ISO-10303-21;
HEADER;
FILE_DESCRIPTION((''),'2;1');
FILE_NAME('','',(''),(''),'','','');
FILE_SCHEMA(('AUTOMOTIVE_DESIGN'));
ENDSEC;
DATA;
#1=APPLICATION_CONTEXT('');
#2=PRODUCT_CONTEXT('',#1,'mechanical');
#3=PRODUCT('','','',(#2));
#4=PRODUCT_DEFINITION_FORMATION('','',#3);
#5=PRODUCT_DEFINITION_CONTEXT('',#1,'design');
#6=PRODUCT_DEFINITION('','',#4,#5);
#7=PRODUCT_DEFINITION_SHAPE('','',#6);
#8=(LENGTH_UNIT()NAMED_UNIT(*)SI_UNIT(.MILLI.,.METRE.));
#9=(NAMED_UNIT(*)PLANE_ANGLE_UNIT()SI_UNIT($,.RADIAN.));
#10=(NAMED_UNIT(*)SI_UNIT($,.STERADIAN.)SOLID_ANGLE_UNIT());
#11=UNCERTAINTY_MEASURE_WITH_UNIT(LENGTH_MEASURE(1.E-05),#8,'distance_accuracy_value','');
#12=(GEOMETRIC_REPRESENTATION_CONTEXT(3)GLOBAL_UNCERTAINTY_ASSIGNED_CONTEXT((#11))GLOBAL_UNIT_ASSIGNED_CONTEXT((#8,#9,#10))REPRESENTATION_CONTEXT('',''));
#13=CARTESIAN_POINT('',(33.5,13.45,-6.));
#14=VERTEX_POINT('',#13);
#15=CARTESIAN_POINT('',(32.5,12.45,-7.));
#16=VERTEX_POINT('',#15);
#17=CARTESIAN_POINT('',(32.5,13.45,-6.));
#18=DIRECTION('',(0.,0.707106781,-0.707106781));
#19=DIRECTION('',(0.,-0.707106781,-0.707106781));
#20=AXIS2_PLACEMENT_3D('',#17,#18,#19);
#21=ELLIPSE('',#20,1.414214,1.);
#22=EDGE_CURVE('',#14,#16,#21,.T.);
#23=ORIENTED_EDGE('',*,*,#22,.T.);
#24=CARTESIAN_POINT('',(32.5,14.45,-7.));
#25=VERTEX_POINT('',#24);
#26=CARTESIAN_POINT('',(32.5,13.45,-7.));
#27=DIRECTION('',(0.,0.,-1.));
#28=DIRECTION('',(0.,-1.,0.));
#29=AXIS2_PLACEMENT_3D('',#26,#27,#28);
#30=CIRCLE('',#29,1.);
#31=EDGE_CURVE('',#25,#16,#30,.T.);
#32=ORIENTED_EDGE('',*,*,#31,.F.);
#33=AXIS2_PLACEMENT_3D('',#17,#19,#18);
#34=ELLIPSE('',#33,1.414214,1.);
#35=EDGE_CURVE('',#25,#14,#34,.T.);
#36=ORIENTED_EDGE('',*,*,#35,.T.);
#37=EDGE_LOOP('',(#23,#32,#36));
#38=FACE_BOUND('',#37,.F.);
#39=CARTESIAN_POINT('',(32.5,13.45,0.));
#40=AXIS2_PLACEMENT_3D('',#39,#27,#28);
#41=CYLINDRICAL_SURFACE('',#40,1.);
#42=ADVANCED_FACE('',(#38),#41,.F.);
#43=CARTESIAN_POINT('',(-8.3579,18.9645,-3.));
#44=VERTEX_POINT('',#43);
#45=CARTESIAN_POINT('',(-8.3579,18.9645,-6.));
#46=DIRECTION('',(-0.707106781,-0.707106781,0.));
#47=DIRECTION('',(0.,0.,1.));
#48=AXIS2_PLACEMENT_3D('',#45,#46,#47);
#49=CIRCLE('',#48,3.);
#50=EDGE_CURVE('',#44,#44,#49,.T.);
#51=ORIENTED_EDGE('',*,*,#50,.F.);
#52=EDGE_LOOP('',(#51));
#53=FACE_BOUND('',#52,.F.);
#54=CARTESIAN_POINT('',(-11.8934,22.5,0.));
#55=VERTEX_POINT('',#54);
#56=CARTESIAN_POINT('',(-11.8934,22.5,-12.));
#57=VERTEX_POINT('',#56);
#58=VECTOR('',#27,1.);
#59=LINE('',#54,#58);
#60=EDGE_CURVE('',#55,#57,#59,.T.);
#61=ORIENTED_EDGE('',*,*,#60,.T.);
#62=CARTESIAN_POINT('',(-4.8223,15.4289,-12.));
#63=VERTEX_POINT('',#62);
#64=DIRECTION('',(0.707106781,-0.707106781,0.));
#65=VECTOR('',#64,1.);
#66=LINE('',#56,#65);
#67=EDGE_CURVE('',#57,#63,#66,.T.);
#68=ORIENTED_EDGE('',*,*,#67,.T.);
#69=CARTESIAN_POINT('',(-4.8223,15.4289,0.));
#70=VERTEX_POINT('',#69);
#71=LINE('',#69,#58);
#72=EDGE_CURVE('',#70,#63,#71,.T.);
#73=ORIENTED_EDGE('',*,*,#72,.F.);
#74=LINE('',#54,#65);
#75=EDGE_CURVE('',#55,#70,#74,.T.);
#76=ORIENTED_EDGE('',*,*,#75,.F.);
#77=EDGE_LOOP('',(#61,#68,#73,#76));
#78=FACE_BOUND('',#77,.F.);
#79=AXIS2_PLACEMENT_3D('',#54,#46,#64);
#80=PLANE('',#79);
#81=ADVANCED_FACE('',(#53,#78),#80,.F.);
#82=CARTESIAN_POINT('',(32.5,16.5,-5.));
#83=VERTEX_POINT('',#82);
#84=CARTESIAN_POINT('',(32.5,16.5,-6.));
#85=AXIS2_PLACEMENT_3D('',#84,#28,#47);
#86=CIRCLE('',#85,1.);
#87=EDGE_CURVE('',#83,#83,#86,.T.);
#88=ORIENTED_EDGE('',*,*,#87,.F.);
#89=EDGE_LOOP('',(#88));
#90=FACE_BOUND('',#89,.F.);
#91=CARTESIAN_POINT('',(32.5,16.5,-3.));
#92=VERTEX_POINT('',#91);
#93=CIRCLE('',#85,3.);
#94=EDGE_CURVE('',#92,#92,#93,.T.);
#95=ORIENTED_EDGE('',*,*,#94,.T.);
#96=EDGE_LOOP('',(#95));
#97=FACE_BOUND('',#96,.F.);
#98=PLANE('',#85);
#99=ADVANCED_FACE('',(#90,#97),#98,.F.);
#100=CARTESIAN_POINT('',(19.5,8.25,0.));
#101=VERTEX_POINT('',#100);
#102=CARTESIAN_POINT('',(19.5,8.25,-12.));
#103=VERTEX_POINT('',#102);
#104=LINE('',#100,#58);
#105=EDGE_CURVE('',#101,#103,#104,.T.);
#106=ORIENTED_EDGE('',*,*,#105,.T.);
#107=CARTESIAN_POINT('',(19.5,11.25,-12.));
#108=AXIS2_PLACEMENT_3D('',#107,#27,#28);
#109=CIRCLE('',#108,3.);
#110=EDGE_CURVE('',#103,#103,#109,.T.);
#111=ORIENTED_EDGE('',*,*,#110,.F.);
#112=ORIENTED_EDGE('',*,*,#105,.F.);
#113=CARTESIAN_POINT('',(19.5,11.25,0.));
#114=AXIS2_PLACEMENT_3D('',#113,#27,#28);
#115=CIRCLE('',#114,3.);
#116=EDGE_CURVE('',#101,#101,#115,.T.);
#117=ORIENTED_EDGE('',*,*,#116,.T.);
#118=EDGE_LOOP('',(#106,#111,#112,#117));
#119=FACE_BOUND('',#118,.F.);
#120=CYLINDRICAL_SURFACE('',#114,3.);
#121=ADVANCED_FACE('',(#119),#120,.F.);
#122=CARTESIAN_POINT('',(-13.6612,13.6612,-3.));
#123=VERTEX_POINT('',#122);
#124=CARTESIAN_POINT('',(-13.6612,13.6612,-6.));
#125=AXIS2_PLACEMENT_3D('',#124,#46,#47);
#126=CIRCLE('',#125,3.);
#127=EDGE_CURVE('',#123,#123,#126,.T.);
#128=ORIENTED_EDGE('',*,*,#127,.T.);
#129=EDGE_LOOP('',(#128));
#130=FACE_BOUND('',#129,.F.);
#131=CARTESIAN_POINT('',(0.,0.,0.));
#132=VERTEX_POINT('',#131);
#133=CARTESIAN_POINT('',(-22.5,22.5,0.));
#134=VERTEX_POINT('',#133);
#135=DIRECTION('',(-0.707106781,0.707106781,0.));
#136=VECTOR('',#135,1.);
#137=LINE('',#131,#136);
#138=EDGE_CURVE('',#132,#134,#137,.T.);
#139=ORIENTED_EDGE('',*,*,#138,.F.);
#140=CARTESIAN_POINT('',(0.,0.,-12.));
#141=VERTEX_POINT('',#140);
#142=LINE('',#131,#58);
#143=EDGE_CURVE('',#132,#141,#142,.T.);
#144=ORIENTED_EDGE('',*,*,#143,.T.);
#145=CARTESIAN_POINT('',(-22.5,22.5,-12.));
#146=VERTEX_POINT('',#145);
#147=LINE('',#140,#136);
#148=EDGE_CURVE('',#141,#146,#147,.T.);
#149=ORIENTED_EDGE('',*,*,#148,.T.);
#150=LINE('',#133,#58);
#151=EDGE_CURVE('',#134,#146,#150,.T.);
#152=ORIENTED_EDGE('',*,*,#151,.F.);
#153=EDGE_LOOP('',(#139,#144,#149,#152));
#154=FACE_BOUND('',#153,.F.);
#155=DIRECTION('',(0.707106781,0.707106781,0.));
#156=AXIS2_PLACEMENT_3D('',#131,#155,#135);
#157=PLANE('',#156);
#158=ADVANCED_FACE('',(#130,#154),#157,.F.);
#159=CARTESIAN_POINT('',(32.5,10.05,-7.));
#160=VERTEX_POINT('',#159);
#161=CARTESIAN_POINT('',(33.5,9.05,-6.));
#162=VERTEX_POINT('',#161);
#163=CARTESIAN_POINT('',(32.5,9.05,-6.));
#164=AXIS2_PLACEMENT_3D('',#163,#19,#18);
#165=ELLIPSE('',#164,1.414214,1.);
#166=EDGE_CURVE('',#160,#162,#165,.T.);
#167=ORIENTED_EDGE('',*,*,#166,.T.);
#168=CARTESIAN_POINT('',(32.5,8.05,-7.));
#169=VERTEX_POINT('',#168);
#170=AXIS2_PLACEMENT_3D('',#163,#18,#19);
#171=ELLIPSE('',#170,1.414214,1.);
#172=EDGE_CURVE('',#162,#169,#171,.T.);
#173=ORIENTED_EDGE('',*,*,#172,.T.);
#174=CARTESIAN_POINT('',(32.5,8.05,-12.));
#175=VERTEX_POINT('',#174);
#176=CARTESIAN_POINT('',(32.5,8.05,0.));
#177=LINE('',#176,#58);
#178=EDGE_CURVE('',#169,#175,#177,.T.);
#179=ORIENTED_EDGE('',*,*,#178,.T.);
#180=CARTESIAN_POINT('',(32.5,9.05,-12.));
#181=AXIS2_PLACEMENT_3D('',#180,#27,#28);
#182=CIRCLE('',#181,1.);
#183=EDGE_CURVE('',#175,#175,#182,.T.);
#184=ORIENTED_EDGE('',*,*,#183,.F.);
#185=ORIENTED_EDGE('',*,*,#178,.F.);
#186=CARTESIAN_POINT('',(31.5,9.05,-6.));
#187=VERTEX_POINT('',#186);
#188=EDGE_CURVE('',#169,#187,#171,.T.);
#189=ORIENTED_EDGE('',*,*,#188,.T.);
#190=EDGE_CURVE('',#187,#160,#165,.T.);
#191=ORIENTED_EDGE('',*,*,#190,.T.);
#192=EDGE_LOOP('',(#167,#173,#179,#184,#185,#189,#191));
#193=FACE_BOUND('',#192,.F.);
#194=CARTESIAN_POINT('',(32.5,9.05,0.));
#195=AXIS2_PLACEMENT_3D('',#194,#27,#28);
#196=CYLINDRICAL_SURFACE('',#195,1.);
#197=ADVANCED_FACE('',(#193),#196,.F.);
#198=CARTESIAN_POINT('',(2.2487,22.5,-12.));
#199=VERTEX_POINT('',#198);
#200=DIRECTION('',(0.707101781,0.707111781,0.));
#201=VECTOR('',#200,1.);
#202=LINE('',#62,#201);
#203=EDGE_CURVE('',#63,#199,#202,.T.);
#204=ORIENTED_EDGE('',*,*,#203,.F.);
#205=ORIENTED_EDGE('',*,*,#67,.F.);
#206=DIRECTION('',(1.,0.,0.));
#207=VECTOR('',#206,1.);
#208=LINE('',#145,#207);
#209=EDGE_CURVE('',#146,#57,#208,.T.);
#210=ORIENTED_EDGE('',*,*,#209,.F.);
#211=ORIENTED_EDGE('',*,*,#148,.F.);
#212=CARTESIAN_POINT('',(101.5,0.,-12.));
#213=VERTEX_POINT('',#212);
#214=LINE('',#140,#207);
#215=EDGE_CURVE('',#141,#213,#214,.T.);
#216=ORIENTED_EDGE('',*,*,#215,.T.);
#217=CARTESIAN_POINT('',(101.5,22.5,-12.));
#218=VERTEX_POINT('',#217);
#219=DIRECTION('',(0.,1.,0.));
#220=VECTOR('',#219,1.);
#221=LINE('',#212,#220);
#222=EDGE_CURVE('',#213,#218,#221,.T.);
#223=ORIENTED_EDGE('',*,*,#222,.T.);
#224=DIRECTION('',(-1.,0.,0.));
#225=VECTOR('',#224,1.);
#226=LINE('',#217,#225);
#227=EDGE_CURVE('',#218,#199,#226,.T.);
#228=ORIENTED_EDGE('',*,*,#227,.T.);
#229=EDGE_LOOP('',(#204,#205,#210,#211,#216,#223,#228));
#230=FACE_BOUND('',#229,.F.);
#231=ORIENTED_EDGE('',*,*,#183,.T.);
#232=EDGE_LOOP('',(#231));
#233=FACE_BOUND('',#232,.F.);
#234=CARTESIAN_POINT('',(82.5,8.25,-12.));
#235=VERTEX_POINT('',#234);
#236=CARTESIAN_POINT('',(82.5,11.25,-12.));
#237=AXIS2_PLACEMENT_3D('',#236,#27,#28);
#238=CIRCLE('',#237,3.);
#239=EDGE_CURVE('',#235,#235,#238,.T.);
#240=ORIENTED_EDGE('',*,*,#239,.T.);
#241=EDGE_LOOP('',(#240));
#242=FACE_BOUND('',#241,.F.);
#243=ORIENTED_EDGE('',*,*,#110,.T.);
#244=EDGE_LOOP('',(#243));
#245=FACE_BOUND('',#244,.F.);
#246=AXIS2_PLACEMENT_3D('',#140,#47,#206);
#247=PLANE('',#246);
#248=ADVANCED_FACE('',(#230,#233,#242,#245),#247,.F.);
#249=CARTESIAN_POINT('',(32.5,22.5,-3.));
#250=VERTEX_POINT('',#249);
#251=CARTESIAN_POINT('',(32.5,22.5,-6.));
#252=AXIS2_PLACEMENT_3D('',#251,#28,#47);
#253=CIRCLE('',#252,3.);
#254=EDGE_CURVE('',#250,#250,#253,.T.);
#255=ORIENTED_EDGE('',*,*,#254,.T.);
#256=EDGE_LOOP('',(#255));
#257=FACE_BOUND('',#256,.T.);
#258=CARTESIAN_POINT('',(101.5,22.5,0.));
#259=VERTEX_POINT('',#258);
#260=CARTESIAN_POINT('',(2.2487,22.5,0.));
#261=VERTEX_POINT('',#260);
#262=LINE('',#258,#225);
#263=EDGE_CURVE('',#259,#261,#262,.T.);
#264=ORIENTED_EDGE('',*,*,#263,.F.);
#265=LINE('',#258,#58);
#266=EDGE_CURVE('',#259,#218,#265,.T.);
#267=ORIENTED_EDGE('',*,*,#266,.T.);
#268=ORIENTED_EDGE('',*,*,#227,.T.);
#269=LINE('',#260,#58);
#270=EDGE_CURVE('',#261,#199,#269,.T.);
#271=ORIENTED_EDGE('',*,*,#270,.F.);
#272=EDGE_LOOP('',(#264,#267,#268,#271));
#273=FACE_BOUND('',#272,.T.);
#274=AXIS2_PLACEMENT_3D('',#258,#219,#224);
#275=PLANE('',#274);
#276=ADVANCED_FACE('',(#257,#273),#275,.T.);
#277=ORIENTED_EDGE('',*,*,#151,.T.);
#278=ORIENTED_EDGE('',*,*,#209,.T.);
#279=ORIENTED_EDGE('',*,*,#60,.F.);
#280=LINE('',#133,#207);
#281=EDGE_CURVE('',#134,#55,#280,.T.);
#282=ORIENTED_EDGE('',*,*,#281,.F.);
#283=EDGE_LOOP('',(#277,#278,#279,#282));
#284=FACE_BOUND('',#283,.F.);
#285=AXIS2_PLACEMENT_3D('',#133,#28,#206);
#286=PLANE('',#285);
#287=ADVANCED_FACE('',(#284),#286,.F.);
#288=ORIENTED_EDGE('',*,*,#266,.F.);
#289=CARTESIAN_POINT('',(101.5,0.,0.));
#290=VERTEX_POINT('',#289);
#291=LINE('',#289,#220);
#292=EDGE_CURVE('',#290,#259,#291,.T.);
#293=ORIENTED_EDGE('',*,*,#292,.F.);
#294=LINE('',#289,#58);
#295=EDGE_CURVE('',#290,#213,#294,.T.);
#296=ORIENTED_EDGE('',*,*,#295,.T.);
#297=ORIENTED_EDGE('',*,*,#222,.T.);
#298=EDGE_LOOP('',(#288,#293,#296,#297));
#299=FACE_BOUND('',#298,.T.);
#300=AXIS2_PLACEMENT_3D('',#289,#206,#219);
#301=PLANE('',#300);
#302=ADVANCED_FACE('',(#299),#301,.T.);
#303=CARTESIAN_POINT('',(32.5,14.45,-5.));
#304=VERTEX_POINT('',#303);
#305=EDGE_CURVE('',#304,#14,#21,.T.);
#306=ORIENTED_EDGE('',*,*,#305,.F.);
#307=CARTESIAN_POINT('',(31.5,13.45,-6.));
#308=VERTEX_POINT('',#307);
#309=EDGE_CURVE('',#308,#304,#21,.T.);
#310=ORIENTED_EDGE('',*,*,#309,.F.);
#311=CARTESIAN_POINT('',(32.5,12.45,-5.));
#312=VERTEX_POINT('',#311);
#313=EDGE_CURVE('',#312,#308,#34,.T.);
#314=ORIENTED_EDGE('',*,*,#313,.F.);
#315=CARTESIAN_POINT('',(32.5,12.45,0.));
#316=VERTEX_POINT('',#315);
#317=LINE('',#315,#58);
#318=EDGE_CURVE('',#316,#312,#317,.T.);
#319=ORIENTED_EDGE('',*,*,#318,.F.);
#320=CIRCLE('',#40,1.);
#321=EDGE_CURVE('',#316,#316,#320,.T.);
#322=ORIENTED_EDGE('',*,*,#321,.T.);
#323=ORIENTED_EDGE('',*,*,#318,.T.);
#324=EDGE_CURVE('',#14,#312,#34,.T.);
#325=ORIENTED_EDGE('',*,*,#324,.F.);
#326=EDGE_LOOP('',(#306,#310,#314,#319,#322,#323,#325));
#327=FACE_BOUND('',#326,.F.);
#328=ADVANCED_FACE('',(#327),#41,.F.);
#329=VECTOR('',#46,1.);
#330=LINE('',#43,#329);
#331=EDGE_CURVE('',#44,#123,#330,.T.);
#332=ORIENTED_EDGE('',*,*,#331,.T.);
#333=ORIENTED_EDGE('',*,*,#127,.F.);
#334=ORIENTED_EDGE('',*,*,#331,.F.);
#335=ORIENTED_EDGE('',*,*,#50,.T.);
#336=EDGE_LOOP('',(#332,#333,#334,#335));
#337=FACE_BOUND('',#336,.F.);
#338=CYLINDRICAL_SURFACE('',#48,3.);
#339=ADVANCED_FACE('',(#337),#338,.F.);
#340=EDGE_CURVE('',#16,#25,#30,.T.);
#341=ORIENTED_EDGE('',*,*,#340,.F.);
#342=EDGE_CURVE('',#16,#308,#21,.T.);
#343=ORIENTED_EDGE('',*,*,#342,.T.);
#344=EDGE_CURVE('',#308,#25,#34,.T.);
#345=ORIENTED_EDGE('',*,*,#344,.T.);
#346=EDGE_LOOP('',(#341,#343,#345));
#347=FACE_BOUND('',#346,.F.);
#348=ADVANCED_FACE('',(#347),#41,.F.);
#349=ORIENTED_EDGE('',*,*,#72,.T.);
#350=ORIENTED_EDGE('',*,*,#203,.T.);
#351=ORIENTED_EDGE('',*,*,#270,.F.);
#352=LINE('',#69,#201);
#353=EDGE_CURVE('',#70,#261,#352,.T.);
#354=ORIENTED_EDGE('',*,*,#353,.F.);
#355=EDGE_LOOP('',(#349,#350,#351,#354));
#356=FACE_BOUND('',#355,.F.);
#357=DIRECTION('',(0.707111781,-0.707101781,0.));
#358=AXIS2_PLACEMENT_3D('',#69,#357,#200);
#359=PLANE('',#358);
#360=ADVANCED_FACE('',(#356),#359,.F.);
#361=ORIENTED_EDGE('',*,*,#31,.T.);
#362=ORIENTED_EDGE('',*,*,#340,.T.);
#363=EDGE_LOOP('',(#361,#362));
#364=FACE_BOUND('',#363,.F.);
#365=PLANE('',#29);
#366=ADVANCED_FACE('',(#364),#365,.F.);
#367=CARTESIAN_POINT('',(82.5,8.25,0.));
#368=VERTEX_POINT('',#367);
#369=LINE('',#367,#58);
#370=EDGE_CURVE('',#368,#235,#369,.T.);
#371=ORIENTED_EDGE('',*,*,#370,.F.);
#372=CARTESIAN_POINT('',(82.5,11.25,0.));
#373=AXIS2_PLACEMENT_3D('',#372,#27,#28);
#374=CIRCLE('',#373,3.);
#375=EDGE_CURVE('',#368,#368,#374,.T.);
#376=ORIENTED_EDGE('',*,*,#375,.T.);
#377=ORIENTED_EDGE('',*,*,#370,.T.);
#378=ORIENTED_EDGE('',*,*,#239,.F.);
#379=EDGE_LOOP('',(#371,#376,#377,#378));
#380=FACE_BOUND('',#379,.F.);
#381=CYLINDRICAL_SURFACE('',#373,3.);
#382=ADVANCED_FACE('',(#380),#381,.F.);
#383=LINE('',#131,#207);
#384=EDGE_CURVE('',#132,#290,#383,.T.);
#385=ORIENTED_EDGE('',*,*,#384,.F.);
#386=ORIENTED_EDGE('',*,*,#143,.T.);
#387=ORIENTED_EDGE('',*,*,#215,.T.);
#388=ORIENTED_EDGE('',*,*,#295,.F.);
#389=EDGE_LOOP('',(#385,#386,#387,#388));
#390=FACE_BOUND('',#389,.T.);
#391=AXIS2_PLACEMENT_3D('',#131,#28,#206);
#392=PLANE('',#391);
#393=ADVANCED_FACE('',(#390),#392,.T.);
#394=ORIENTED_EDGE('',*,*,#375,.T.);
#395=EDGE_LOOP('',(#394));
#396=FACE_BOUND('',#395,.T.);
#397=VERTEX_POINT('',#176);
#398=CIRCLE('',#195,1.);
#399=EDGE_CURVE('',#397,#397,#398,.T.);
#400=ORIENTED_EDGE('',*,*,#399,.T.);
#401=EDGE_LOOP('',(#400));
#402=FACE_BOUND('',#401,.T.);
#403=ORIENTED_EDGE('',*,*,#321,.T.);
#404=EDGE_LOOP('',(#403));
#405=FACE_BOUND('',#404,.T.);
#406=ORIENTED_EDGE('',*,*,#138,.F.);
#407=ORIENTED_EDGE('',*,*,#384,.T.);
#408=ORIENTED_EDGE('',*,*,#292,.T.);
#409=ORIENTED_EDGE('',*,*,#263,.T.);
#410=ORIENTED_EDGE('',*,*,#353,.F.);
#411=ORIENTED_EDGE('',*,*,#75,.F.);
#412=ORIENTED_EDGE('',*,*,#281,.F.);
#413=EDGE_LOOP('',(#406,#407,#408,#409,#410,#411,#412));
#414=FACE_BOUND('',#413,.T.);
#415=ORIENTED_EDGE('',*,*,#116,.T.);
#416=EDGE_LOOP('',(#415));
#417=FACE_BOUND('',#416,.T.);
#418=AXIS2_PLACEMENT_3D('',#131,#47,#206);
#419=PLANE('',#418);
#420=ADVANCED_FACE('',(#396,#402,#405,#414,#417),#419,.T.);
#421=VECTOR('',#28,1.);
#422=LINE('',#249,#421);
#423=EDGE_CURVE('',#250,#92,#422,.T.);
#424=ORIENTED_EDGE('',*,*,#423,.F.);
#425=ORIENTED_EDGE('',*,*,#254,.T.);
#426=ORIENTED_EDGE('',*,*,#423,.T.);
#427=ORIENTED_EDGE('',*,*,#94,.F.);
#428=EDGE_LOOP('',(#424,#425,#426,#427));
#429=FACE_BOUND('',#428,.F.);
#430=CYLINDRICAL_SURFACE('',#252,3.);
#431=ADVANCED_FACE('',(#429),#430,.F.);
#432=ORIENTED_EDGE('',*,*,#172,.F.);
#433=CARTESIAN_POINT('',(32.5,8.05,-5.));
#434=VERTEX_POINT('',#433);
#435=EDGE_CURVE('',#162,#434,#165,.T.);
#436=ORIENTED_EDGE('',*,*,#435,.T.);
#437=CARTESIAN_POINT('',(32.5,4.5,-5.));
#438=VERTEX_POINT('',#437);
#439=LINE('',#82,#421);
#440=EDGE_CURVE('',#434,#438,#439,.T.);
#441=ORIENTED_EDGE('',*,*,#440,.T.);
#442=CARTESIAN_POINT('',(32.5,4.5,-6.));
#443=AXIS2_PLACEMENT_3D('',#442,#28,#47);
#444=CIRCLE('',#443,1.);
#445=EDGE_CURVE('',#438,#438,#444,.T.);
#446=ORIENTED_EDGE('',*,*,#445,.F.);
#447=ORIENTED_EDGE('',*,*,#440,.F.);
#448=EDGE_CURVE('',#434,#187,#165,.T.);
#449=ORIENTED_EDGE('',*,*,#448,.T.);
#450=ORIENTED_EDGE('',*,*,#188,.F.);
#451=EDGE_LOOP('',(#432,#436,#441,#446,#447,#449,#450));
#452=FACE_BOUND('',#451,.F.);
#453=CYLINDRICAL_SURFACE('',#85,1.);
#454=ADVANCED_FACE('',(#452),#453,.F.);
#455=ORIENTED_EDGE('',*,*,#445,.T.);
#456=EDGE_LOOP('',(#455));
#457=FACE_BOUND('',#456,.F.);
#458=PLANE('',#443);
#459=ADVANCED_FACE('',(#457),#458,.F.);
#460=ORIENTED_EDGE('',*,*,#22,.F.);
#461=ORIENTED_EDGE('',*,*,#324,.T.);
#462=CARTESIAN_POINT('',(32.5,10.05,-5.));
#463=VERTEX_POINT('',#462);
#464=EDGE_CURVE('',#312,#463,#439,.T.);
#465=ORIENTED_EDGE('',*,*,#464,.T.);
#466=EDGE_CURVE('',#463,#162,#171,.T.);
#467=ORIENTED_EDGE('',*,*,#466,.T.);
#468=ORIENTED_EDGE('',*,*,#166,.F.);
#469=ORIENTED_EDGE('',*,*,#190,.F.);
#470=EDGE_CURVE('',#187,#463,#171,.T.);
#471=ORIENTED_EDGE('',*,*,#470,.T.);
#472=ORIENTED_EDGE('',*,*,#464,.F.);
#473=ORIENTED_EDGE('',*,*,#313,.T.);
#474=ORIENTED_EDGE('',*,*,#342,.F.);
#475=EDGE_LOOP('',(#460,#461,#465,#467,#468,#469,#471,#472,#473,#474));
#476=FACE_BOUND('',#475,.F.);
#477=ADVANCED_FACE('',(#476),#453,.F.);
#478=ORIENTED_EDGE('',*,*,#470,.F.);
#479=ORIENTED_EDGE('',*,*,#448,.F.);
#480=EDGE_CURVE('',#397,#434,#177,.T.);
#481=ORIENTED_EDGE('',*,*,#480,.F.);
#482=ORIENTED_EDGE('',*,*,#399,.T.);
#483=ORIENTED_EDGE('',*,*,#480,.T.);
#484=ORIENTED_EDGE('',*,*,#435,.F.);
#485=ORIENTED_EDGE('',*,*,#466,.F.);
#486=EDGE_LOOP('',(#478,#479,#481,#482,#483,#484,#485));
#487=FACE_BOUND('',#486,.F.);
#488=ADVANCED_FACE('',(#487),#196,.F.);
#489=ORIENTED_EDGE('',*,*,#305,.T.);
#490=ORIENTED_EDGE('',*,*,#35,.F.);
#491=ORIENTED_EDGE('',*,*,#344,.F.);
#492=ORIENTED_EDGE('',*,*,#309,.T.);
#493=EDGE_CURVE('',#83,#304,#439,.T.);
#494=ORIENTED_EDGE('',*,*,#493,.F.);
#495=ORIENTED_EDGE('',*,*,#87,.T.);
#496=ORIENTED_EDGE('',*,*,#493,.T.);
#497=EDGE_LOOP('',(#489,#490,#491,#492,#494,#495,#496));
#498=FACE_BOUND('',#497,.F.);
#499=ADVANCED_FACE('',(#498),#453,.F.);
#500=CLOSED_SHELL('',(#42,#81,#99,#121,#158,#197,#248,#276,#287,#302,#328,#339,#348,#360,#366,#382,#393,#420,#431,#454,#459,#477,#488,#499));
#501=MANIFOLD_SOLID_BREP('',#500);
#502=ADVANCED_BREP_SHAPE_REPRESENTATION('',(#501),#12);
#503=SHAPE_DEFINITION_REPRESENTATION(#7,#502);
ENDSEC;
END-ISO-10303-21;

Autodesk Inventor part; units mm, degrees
ref_plane "YZ Plane" through (0, 0, 0) normal (1, 0, 0) x (0, 1, 0)
ref_plane "XZ Plane" through (0, 0, 0) normal (0, 1, 0) x (-1, 0, 0)
ref_plane "XY Plane" through (0, 0, 0) normal (0, 0, 1) x (1, 0, 0)
sketch "Esboço1" plane through (0, 0, 0) normal (0, 0, 1) x (1, 0, 0)
  line L0 (0, 0) -> (101.5, 0)
  line L1 (0, 0) -> (-22.5, 22.5)
  line L2 (0, 0) -> (30, 0) construction
  line L3 (101.5, 0) -> (101.5, 22.5)
  line L4 (-22.5, 22.5) -> (-11.8934, 22.5)
  line L5 (-11.8934, 22.5) -> (-4.8223, 15.4289)
  line L6 (101.5, 22.5) -> (2.2487, 22.5)
  line L7 (-11.8934, 22.5) -> (-22.5, 22.5)
  line L8 (-22.5, 22.5) -> (-34.2669, 34.2669)
  line L9 (-4.8223, 15.4289) -> (-28.9636, 39.5702)
  line L10 (-4.8223, 15.4289) -> (2.2487, 22.5)
  dimension "d0" = 101.5
  dimension "d2" = 135
  dimension "d3" = 22.5
  dimension "d5" = 10
  dimension "d51" = 7.5
extrude "Extrusão1" add sketch "Esboço1" against normal blind 12
sketch "Esboço2" plane through (0, 0, 0) normal (0, 0, 1) x (1, 0, 0)
  line L0 (101.5, 22.5) -> (101.5, 0) projected
  line L1 (0, 0) -> (-22.5, 22.5) projected
  line L2 (2.2487, 22.5) -> (101.5, 22.5) projected
  line L3 (101.5, 22.5) -> (82.5, 22.5)
  point P0 (82.5, 11.25)
  point P1 (19.5, 11.25)
  point P2 (32.5, 13.45)
  point P3 (32.5, 9.05)
hole "Furo1" at (82.5, 11.25, 0) at (19.5, 11.25, 0) direction (0, 0, -1) diameter 6 end through all
hole "Furo2" at (32.5, 13.45, 0) direction (0, 0, -1) diameter 2 depth 7
hole "Furo3" at (32.5, 9.05, 0) direction (0, 0, -1) diameter 2 end through all
sketch "Esboço3" plane through (-4.8223, 15.4289, -12) normal (0.7071068, 0.7071068, 0) x (-0.7071068, 0.7071068, 0)
  line L0 (0, 12) -> (0, 0) projected
  line L1 (0, 6) -> (5, 6)
  point P0 (-14.3198, 12)
  dimension "d34" = 5
hole "Furo4" at (-8.3579, 18.9645, -6) direction (-0.7071068, -0.7071068, 0) diameter 6 end through all
sketch "Esboço4" plane through (2.2487, 22.5, 0) normal (0, 1, 0) x (1, 0, 0)
  line L0 (0, 0) -> (0, 12) projected
  line L1 (0, 12) -> (0, 5.7893)
  line L2 (99.2513, 12) -> (0, 12) projected
  line L3 (31.2513, 0) -> (29.2513, 0) projected
  line L4 (30.2513, 0) -> (30.2513, 6)
  point P0 (-2.2487, 0)
  dimension "d42" = 6.2107
hole "Furo5" at (32.5, 22.5, -6) direction (0, -1, 0) diameter 2 depth 18 counterbore diameter 6 counterbore depth 6
fillet "Arredondamento1" [suppressed]
properties part number "main_frame" material "Aluminum 6061-AHC"
